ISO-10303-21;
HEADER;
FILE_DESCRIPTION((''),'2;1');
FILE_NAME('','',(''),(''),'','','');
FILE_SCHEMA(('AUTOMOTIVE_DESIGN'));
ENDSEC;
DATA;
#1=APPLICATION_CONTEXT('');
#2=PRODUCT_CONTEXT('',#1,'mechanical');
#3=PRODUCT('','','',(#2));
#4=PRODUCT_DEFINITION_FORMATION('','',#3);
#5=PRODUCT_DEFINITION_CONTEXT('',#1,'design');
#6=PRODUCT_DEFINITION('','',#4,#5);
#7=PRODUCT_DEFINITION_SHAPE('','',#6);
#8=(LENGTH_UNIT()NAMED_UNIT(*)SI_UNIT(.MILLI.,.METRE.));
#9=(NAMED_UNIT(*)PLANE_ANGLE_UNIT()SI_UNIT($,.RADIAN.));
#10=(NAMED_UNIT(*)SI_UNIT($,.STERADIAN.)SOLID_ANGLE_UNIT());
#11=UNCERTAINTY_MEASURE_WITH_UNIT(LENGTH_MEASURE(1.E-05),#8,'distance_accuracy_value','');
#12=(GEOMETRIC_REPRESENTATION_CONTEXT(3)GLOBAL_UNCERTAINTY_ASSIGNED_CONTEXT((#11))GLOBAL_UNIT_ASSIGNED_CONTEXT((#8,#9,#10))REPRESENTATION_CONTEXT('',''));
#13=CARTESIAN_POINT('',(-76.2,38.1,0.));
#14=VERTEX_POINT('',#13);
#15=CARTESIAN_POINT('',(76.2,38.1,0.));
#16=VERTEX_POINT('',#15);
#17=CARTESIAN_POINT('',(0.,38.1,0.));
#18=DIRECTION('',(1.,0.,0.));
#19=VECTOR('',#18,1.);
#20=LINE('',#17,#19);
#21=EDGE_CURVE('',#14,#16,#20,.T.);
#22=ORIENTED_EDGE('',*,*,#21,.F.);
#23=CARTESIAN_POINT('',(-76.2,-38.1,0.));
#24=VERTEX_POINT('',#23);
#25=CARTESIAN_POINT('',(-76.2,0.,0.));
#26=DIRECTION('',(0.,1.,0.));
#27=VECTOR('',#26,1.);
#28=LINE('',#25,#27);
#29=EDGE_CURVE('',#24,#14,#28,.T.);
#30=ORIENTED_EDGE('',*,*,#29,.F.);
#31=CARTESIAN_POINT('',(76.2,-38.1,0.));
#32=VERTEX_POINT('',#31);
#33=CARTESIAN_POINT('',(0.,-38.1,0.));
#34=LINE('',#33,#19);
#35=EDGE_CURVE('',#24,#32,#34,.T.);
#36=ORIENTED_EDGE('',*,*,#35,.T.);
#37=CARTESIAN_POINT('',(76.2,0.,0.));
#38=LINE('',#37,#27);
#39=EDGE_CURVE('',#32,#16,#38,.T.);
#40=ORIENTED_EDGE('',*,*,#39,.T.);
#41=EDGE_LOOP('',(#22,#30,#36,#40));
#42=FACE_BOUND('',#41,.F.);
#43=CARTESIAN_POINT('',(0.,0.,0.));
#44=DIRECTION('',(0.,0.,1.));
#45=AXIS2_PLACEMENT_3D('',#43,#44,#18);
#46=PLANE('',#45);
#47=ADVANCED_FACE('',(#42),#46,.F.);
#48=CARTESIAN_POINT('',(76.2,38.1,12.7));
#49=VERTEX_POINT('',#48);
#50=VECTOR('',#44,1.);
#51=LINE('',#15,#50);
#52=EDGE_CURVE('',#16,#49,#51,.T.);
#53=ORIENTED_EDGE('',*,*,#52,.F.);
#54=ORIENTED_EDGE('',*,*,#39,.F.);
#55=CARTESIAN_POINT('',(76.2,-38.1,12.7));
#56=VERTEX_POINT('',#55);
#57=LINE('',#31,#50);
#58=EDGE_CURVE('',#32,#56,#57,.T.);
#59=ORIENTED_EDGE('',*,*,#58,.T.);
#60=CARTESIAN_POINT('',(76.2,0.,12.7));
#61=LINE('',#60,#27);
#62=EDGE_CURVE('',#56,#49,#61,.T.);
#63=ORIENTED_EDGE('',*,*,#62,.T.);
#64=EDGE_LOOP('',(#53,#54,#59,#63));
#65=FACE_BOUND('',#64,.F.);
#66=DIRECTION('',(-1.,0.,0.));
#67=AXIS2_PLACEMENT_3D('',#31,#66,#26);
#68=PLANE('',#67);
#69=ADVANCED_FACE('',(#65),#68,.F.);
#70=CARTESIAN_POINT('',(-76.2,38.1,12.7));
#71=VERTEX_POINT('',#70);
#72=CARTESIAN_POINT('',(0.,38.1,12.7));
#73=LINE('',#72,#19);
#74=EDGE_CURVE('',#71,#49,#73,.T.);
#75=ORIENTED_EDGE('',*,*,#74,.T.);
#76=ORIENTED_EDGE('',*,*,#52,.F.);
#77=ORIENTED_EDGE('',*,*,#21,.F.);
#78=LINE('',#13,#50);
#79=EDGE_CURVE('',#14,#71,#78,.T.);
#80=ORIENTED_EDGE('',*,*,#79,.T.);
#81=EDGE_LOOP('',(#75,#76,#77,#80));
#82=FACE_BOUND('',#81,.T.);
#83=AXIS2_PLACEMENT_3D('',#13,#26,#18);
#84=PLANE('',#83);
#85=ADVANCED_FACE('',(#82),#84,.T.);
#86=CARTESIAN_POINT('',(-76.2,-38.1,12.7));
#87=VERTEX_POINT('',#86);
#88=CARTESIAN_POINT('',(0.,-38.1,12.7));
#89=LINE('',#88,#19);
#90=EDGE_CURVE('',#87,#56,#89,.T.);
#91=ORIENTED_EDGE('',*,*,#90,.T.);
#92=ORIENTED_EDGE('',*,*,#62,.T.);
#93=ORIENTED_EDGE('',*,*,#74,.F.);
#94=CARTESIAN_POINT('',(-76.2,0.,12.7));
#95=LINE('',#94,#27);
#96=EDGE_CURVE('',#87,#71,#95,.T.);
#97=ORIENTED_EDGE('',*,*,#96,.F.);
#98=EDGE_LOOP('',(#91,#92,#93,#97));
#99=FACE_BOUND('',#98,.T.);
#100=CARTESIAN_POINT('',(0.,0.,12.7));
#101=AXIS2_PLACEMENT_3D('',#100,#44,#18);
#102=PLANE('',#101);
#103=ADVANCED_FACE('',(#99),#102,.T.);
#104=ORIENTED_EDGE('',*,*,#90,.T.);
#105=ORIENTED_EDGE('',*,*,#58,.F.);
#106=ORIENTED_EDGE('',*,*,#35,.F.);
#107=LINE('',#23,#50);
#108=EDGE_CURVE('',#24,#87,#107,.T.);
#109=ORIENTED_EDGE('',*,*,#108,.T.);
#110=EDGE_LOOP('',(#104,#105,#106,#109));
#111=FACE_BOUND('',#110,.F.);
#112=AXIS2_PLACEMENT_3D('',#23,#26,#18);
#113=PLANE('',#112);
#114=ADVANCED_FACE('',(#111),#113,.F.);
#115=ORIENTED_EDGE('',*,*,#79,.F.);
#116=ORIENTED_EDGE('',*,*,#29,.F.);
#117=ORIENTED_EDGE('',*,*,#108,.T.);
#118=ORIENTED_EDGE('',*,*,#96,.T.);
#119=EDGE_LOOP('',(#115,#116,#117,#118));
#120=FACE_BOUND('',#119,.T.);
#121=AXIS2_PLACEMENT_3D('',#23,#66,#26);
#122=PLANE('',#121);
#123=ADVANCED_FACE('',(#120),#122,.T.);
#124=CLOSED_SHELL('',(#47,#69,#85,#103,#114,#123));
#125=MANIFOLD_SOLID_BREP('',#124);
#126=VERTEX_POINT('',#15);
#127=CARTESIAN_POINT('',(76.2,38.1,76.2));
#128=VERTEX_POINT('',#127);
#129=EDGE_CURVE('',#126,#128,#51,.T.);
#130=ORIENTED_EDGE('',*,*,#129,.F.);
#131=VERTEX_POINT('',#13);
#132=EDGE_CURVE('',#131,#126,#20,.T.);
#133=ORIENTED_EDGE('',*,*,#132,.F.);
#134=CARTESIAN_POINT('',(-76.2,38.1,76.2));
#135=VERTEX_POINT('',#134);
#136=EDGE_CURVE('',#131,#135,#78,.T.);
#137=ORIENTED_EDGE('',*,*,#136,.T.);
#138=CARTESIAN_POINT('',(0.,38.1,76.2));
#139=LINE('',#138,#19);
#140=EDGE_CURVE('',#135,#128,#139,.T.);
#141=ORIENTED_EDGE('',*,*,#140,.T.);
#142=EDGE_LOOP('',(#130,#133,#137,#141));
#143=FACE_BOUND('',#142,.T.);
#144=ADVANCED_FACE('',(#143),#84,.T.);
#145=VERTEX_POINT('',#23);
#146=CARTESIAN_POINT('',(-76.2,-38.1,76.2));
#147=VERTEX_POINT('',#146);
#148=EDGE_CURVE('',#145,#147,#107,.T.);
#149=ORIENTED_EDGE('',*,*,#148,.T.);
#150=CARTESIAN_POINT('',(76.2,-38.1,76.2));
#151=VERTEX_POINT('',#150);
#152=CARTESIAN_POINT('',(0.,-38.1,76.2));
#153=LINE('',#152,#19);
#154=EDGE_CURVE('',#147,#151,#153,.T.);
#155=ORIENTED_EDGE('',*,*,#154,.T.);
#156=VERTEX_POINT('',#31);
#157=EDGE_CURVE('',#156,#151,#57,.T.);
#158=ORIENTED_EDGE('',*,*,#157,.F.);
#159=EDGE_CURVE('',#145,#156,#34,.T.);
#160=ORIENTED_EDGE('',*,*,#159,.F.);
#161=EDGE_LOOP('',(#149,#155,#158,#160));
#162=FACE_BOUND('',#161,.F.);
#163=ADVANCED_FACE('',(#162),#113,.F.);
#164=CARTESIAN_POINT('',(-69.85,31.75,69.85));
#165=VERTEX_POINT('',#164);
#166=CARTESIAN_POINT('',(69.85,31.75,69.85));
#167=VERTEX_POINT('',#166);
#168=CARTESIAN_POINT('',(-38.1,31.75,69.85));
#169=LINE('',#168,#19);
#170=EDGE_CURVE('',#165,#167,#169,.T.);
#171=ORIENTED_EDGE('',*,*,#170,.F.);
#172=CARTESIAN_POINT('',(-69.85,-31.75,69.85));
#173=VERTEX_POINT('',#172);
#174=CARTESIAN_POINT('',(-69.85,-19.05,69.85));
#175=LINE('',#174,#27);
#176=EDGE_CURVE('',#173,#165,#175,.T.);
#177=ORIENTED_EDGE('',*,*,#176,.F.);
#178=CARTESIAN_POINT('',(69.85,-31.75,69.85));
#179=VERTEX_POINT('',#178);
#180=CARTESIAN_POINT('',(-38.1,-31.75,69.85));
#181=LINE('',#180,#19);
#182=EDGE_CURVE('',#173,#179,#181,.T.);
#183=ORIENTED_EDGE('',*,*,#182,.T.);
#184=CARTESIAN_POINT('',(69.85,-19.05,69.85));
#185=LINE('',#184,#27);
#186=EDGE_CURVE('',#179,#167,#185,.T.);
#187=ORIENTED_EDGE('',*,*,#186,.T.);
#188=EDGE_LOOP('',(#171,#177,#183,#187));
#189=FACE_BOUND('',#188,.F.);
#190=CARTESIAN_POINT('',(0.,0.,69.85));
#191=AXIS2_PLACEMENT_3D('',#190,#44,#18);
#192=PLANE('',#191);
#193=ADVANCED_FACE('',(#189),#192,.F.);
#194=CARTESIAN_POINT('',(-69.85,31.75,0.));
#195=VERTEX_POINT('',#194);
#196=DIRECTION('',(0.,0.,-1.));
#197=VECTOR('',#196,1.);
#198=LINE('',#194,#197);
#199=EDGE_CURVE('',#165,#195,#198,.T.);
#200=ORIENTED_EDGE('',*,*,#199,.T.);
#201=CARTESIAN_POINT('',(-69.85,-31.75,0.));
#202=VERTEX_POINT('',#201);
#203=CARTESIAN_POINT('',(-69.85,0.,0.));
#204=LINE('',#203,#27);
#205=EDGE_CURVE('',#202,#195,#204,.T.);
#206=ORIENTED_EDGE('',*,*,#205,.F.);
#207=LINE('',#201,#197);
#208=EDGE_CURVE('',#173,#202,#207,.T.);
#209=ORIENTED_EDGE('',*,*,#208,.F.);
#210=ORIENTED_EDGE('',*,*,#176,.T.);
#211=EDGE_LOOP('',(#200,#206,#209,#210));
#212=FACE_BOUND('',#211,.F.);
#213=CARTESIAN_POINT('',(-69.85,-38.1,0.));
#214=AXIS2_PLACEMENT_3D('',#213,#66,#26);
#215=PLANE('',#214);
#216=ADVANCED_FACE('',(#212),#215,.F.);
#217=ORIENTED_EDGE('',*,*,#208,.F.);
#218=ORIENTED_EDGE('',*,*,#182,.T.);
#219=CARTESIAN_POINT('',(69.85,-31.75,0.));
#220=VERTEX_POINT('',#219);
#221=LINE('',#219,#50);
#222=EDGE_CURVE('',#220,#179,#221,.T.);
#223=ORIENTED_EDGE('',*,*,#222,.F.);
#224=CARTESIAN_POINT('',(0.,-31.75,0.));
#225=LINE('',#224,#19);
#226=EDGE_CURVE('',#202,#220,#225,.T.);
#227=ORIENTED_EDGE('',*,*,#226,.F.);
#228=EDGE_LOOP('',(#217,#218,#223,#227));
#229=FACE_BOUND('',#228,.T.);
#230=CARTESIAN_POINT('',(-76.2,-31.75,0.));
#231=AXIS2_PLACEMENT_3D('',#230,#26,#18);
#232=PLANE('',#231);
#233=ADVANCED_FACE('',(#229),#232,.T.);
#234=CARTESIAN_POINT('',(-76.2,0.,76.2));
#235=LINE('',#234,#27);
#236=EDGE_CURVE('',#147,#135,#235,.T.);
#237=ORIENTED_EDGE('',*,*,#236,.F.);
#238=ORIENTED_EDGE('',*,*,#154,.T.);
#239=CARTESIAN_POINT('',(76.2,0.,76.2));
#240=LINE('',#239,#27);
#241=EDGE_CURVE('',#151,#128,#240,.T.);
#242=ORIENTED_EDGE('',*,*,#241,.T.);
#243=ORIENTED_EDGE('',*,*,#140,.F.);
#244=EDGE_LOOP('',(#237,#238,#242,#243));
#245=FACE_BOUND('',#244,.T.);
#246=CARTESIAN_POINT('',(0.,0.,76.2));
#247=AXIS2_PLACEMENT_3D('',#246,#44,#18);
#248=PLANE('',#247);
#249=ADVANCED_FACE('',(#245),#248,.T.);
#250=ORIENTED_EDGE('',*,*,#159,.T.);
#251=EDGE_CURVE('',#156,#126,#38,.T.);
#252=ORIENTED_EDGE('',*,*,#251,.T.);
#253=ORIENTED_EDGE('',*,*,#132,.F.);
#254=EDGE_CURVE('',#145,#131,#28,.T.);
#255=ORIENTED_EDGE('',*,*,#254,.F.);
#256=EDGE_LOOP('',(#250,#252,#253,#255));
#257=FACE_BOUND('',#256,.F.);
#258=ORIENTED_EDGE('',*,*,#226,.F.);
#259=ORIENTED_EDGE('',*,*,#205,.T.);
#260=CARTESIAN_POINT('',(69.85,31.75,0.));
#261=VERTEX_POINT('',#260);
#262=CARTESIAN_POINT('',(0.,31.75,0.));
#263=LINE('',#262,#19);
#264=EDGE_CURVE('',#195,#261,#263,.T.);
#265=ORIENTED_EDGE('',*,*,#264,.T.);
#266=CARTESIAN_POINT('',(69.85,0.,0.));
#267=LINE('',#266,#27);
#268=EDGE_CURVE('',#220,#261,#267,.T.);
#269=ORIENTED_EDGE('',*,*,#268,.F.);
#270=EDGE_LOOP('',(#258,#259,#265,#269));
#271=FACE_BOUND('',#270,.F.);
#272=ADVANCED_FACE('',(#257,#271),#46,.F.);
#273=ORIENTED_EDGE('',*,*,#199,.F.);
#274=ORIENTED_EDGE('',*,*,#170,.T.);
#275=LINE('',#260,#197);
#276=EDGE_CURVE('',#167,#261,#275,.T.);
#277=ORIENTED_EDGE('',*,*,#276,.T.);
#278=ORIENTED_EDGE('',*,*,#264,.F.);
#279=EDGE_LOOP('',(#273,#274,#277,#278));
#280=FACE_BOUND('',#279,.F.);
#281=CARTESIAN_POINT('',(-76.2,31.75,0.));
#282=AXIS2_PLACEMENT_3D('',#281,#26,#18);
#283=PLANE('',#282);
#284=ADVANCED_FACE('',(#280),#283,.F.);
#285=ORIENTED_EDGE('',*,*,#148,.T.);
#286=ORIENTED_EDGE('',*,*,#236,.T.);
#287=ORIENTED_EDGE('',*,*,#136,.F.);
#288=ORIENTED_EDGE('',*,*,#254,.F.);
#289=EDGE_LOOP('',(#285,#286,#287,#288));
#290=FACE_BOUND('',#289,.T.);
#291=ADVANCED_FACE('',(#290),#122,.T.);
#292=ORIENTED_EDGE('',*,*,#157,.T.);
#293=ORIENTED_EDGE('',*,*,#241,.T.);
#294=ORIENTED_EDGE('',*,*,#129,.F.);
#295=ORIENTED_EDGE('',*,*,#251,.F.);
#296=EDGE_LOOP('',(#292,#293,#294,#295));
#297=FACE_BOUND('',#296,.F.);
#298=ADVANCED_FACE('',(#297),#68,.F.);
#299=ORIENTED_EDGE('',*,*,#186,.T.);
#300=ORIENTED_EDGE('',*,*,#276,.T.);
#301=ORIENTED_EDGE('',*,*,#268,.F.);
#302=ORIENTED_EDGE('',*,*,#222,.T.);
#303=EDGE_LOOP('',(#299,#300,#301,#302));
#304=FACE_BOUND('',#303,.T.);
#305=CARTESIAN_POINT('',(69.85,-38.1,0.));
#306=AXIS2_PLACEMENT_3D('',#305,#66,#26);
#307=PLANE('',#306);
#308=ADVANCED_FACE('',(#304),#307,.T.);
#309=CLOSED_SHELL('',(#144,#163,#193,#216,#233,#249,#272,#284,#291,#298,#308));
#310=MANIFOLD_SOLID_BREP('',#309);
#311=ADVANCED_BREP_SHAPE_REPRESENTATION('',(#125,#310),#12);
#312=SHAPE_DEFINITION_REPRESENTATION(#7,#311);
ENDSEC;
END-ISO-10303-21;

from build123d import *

# Parameters (mm, degrees)
F0_W     = 152.4
F0_H     = 76.2
F1_DEPTH = 76.2
F2_T     = -6.35
F3_W     = 152.4
F3_H     = 76.2
F4_DEPTH = 12.7


# Not quite as in the source:
# - a length typed as a fraction of an inch, garbled in the dataset ("3 / 203.2 mm" for 3/8 in), is restored


with BuildPart() as f1:
    # F0 (on Top) → F1 (new body)
    with BuildSketch(Plane.XY):
        Rectangle(F0_W, F0_H)
    extrude(amount=F1_DEPTH)

    # F2
    f2_openings = [f1.faces().sort_by_distance(p)[0] for p in [
        (0, 0, 0),
    ]]
    offset(amount=F2_T, openings=f2_openings)


with BuildPart() as f4:
    # F3 (on Top) → F4 (new body)
    with BuildSketch(Plane.XY):
        Rectangle(F3_W, F3_H)
    extrude(amount=F4_DEPTH)


solid = Compound([f1.part, f4.part])
